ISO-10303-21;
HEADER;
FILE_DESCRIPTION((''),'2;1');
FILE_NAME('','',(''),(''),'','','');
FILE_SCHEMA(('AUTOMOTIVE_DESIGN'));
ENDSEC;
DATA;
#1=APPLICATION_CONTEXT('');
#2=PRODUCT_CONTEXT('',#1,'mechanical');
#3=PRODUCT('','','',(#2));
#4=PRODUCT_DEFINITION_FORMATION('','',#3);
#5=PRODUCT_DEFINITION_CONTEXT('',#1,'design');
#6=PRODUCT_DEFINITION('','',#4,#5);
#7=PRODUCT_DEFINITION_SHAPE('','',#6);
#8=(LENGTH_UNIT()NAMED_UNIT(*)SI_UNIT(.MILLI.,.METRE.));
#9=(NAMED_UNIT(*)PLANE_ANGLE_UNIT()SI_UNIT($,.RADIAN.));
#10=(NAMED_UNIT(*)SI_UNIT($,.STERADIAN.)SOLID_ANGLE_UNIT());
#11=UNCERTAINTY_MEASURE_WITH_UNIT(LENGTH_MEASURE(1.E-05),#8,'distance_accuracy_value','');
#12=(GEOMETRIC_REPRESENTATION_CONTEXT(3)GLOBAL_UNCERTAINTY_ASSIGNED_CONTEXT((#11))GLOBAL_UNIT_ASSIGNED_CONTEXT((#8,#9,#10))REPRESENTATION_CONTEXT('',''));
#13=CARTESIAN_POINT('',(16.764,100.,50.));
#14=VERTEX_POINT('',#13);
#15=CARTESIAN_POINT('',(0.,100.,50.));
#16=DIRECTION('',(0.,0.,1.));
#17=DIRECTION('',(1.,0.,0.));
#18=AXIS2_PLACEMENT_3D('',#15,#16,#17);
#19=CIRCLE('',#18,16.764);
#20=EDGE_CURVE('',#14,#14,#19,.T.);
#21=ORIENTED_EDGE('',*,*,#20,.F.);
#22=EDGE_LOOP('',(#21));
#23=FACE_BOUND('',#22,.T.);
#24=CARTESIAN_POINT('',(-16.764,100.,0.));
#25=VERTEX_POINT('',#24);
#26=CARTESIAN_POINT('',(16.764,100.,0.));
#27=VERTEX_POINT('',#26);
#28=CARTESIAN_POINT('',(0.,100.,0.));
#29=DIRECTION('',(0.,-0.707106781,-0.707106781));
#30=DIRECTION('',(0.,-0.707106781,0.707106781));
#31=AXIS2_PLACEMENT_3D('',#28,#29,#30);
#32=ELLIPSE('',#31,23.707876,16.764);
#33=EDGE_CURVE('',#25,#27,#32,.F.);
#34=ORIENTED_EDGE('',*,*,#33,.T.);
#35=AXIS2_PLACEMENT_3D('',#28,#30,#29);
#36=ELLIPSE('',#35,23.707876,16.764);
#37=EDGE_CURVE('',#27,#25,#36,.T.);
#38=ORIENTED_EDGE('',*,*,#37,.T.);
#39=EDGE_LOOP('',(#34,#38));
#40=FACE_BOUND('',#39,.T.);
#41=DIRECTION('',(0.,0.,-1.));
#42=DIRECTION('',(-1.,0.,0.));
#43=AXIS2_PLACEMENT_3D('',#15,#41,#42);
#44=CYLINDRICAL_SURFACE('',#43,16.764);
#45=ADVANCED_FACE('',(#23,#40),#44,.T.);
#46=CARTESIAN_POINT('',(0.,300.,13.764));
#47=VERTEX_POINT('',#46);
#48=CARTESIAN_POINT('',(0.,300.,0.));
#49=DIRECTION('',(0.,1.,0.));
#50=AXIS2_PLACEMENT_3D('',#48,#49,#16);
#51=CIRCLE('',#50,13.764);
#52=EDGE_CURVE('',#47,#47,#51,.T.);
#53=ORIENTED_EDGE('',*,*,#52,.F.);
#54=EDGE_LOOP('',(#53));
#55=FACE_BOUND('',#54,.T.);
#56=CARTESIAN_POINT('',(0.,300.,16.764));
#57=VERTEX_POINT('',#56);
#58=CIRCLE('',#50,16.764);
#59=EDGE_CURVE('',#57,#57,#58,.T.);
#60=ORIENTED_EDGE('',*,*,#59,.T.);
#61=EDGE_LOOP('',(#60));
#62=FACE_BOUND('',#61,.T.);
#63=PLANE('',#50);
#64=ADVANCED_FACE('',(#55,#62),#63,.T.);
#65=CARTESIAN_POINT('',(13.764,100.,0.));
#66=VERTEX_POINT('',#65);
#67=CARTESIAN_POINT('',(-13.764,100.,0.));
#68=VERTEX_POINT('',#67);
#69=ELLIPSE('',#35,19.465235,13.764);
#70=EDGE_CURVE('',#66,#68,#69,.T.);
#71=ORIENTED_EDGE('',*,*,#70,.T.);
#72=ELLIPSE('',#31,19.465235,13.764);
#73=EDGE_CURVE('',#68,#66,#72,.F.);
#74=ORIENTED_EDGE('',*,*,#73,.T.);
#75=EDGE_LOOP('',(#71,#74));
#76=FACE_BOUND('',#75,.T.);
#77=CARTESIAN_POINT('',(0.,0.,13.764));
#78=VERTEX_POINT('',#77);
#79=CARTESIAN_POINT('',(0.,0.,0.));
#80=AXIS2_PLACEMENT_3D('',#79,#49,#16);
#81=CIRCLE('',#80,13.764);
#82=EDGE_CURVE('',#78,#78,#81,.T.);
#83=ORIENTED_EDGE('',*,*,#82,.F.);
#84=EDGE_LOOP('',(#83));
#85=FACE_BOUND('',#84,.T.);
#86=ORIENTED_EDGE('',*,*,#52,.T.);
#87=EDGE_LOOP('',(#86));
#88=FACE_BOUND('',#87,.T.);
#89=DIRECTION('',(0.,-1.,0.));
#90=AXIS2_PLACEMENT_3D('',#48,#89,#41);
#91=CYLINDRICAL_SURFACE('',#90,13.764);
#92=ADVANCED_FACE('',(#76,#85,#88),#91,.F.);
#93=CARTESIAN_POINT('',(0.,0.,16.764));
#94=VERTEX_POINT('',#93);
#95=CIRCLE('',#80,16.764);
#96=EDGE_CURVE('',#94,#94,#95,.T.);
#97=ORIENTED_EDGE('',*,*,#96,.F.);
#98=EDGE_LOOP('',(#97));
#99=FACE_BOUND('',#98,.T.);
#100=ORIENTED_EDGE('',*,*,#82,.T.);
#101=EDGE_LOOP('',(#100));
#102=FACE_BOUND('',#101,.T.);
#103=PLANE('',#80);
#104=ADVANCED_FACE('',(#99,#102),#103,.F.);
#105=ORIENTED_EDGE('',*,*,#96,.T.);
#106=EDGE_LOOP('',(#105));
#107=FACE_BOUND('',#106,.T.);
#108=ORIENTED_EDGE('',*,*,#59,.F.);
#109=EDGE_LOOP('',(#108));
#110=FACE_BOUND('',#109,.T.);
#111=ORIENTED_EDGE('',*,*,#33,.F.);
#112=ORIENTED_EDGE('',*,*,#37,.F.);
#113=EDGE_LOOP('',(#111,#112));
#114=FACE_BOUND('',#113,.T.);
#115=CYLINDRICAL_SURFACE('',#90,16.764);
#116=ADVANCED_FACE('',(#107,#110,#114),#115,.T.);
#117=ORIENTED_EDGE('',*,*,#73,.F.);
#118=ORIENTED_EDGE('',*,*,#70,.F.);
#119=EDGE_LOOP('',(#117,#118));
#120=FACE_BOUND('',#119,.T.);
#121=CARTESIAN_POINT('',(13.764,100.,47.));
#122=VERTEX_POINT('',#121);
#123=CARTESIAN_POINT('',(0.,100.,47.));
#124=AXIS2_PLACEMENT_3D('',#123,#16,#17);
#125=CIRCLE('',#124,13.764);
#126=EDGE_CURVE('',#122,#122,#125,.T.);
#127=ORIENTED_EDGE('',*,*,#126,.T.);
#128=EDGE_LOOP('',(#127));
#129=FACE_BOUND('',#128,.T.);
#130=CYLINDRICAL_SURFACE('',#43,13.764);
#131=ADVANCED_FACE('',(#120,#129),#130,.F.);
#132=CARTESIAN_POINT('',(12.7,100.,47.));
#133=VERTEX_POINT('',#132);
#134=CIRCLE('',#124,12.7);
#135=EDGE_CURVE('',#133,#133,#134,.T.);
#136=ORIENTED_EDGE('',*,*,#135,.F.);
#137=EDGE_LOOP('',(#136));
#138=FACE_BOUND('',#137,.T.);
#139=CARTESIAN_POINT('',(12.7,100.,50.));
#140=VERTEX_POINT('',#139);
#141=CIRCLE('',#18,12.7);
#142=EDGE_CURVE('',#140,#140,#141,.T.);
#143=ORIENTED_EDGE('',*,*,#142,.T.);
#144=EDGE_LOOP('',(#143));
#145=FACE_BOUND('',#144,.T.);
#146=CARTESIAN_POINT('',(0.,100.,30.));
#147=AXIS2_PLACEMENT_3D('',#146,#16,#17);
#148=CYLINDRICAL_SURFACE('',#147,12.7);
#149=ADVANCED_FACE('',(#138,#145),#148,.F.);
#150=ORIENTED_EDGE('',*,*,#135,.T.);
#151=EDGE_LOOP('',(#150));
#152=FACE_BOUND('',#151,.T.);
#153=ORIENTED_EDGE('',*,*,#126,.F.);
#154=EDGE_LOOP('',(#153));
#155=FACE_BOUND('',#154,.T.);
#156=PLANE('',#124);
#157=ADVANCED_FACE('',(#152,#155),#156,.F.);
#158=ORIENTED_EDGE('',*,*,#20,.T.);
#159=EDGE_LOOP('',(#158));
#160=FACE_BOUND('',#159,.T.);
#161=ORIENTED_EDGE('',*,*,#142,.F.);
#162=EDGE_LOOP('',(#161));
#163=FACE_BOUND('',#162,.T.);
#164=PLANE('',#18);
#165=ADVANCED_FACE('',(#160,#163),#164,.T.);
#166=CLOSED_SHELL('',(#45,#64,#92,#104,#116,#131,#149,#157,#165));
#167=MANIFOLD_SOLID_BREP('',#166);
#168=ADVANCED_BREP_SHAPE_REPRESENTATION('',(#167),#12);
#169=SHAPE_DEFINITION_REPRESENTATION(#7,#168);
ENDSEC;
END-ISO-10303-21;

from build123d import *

# Parameters (mm, degrees)
SKETCH1_R           = 16.764
BOSS_EXTRUDE1_DEPTH = 300
SKETCH2_R           = 16.764
BOSS_EXTRUDE2_DEPTH = 50
SHELL1_START        = 3
SHELL1_OUTLINE_R    = 13.764
SHELL1_DEPTH        = 297
SHELL1_START_2      = -1e-07
SHELL1_2_OUTLINE_R  = 13.764
SHELL1_2_DEPTH      = 47.0000001
SKETCH3_R           = 12.7
CUT_EXTRUDE1_DEPTH  = 20
SKETCH4_R           = 13.764
CUT_EXTRUDE2_DEPTH  = 302.645539824


with BuildPart() as part:
    # Sketch1 → Boss-Extrude1 (new body)
    with BuildSketch(Plane(origin=(0, 0, 0), x_dir=(1, 0, 0), z_dir=(0, 1, 0))):
        with Locations(Location((0, 0, 0), (0, 0, 270))):
            Circle(SKETCH1_R)
    extrude(amount=BOSS_EXTRUDE1_DEPTH)

    # Sketch2 → Boss-Extrude2 (add)
    with BuildSketch(Plane.XY):
        with Locations((0, 100)):
            Circle(SKETCH2_R)
    extrude(amount=BOSS_EXTRUDE2_DEPTH)

    # Shell1: read off the stored shape, not the designer's step
    # Shell1 outline → Shell1 (cut)
    with BuildSketch(Plane(origin=(0, 0, 0), x_dir=(1, 0, 0), z_dir=(0, 1, 0)).offset(SHELL1_START)):
        Circle(SHELL1_OUTLINE_R)
    extrude(amount=SHELL1_DEPTH, mode=Mode.SUBTRACT)

    # Shell1 2 outline → Shell1 2 (cut)
    with BuildSketch(Plane.XY.offset(SHELL1_START_2)):
        with Locations((0, 100)):
            Circle(SHELL1_2_OUTLINE_R)
    extrude(amount=SHELL1_2_DEPTH, mode=Mode.SUBTRACT)

    # Sketch3 → Cut-Extrude1 (cut)
    with BuildSketch(Plane.XY.offset(50)):
        with Locations((0, 100)):
            Circle(SKETCH3_R)
    extrude(amount=-CUT_EXTRUDE1_DEPTH, mode=Mode.SUBTRACT)

    # Sketch4 → Cut-Extrude2 (cut, through all)
    with BuildSketch(Plane(origin=(0, 3, 0), x_dir=(1, 0, 0), z_dir=(0, 1, 0))):
        with Locations(Location((0, 0, 0), (0, 0, 270))):
            Circle(SKETCH4_R)
    extrude(amount=-CUT_EXTRUDE2_DEPTH, mode=Mode.SUBTRACT)


solid = part.part
